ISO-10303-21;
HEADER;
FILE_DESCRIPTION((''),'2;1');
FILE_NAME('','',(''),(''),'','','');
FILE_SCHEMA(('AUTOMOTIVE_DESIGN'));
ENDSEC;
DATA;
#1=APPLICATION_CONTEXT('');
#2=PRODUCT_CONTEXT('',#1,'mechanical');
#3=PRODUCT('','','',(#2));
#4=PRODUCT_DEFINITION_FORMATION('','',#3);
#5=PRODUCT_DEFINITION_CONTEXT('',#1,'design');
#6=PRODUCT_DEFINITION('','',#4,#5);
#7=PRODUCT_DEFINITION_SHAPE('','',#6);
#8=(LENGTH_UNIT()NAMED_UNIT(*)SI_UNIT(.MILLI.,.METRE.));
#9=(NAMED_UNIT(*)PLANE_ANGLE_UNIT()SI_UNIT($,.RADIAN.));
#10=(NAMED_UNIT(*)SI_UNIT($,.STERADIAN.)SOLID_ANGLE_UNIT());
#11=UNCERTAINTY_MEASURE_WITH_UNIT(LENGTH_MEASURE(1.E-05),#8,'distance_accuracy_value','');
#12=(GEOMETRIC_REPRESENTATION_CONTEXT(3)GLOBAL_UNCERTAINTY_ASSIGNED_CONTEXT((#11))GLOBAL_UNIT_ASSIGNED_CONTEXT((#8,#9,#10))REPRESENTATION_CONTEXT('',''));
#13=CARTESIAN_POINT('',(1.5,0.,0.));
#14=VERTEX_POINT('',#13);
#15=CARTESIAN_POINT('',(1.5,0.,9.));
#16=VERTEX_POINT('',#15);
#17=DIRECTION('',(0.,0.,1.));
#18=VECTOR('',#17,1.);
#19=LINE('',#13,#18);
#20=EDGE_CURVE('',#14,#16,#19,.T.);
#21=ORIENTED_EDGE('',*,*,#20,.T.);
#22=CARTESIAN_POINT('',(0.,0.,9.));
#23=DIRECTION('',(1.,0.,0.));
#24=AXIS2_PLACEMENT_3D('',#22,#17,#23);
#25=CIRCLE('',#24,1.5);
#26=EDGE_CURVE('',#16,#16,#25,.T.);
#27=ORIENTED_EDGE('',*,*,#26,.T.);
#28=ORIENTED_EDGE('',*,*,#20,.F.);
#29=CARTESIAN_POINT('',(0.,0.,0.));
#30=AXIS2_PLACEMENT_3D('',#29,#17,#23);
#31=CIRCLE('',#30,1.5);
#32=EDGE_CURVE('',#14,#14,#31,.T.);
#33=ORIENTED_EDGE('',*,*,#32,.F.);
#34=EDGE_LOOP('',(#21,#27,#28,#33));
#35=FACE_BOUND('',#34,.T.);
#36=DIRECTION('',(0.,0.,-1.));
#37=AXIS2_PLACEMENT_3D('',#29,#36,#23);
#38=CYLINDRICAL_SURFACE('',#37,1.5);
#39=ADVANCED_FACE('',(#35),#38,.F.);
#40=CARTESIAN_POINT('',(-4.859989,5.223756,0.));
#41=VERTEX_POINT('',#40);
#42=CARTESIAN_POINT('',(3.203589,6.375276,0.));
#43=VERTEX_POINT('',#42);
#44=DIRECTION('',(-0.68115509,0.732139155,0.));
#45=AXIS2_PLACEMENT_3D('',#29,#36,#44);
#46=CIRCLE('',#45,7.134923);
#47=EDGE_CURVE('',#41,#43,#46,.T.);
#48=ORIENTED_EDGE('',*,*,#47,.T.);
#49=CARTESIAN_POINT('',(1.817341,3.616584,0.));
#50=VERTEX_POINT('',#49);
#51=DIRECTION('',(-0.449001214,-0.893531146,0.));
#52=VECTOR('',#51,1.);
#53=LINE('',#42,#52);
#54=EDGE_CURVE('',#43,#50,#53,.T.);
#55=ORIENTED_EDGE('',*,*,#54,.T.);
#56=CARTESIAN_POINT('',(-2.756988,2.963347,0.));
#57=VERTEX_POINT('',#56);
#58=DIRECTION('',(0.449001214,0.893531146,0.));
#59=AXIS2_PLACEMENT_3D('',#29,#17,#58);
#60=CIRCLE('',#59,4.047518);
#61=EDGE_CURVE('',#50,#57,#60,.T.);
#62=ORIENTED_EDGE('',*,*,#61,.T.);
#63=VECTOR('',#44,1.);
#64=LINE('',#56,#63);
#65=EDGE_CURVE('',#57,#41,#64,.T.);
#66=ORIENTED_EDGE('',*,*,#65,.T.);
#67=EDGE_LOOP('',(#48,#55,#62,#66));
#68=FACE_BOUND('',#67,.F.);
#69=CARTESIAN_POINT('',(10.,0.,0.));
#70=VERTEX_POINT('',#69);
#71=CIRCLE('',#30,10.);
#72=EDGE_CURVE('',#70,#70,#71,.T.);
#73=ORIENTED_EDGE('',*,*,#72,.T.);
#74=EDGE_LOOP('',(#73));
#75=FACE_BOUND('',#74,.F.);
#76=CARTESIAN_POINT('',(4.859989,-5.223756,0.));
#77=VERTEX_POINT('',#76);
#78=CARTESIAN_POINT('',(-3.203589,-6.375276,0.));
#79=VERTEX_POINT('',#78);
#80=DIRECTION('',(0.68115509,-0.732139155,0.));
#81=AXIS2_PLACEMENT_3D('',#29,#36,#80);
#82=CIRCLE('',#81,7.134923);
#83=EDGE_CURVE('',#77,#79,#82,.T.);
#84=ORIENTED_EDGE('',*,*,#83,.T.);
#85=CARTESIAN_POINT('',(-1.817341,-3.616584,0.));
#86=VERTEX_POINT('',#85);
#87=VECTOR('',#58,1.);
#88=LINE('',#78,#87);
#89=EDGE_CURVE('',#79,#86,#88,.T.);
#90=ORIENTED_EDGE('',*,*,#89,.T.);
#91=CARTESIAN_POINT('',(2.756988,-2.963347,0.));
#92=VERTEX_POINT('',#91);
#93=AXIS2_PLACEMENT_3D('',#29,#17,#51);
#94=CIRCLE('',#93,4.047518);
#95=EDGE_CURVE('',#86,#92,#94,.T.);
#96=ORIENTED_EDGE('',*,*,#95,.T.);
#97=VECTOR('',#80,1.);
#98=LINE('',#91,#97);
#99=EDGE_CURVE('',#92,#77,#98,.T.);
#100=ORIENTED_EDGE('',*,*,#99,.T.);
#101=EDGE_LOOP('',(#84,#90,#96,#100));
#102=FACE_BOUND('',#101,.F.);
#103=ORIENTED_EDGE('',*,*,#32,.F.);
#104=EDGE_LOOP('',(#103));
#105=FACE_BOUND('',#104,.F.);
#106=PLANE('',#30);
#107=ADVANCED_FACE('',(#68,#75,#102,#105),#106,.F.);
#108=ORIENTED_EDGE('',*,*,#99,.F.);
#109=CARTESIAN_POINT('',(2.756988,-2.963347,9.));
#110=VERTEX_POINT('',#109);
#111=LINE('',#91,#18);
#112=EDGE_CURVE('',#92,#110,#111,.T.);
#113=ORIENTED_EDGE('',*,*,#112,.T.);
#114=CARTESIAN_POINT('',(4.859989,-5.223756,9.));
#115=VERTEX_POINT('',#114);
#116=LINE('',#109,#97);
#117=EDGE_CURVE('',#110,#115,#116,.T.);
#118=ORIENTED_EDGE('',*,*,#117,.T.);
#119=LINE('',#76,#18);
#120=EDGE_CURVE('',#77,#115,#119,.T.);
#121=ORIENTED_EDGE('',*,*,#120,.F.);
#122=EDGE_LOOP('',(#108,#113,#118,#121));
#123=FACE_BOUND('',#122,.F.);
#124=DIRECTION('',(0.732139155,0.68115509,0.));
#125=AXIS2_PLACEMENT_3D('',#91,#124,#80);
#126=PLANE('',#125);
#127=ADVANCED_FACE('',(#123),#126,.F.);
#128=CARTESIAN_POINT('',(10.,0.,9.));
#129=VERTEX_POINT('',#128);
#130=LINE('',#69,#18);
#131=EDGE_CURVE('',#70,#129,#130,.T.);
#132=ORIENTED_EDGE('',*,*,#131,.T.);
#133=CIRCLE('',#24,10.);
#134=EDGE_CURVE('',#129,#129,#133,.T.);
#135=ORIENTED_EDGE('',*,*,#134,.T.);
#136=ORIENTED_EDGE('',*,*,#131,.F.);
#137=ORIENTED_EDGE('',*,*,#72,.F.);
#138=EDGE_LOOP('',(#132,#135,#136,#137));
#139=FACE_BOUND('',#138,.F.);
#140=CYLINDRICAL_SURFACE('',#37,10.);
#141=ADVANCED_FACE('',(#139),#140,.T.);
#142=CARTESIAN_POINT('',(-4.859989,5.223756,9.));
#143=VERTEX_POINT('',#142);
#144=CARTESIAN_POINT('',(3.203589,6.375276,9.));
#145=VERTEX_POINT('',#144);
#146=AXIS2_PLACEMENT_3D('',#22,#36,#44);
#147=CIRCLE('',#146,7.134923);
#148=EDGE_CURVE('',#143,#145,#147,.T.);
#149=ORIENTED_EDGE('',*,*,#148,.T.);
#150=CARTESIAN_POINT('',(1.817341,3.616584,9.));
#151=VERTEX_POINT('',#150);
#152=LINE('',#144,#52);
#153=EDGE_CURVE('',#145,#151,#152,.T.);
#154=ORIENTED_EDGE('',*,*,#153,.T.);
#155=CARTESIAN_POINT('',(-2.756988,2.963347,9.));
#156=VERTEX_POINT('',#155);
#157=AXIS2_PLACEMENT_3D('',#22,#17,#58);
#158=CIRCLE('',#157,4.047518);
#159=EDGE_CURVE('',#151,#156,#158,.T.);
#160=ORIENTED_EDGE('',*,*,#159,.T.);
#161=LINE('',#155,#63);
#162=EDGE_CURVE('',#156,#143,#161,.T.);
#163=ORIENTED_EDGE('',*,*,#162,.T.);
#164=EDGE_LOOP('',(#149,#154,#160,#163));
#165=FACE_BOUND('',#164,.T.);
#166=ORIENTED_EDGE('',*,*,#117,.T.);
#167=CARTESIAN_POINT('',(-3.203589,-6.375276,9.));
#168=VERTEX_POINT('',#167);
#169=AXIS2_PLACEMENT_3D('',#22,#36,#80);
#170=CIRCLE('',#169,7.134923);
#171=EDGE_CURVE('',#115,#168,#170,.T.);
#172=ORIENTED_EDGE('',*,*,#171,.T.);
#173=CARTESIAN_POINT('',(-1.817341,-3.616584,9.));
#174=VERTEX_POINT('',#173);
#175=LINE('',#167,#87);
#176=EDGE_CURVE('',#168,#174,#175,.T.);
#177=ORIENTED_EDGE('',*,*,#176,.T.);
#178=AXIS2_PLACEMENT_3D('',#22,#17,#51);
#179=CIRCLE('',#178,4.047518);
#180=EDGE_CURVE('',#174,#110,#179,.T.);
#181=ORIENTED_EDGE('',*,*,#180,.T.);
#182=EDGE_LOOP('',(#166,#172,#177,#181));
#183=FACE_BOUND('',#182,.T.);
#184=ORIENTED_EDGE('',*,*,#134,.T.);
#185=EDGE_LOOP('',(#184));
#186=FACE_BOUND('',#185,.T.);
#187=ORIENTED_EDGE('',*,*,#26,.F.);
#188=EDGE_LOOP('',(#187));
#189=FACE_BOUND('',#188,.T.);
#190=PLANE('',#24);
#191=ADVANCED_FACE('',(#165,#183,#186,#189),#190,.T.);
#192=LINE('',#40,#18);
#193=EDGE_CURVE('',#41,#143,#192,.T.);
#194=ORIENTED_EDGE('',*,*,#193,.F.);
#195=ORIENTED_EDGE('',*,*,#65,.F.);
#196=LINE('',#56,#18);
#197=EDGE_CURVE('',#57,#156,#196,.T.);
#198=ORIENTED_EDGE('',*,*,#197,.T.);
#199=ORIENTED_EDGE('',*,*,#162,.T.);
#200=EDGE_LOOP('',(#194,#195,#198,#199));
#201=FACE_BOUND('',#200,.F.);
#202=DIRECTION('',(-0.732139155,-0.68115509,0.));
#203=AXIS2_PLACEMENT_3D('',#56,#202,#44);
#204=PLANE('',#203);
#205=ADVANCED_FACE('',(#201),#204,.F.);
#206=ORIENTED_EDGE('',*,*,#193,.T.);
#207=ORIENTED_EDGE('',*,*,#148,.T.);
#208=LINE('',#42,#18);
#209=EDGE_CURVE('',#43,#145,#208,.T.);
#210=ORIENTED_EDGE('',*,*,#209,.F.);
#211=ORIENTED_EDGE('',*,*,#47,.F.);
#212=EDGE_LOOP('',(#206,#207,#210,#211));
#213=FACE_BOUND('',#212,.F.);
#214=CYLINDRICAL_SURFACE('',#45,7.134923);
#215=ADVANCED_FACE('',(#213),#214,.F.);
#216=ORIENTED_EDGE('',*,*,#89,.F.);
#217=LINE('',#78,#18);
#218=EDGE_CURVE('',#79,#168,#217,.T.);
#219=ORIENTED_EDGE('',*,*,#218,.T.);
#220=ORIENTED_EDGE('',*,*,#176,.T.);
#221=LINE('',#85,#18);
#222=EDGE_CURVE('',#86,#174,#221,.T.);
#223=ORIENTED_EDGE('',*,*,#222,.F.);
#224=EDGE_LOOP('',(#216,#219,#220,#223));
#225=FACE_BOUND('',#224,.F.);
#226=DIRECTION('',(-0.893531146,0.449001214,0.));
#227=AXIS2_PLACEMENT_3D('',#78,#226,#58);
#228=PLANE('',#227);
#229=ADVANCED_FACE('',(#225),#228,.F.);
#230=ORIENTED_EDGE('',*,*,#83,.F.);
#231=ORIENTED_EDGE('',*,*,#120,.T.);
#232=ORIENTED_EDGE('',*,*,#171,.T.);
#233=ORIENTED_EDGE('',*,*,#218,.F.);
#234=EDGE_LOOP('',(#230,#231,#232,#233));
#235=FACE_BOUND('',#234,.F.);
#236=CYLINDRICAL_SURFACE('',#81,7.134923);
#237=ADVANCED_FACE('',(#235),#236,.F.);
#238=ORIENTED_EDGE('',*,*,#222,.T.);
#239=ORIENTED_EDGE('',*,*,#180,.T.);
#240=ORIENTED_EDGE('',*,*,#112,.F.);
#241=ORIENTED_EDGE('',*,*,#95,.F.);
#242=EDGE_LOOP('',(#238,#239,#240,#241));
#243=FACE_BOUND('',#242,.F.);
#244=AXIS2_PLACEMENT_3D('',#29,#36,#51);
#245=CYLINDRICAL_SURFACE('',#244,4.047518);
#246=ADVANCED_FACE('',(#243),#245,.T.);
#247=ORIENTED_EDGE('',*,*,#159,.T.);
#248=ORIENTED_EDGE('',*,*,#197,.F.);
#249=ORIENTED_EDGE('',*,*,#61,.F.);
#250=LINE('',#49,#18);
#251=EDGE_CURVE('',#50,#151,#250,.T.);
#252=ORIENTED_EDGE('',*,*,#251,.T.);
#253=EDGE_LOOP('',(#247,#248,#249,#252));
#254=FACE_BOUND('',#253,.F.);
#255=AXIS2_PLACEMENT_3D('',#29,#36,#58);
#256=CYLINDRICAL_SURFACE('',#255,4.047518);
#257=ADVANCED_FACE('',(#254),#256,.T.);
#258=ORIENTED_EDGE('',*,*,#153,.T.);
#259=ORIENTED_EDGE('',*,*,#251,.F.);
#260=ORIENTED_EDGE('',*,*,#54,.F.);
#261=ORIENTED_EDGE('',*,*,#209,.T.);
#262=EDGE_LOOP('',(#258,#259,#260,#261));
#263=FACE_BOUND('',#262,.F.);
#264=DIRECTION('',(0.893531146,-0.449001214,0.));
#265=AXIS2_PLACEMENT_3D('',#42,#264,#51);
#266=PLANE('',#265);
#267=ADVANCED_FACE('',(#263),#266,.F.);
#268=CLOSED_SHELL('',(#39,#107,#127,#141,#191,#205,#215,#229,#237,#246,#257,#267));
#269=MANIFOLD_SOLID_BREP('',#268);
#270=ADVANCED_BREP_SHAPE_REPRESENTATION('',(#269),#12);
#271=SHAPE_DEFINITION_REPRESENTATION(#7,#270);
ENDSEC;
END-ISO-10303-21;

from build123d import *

# Parameters (mm, degrees)
F0_R     = 10
F0_R_2   = 1.5
F1_DEPTH = 9


# Not quite as in the source:
# - a feature names something its author has since deleted; it is built from what else it names


with BuildPart() as f1:
    # F0 (on Top) → F1 (new body)
    with BuildSketch(Plane.XY):
        Circle(F0_R)
        with BuildLine():
            Line((-3.2035890311, -6.37527581), (-1.8173406245, -3.6165836534))
            ThreePointArc((-1.8173406245, -3.6165836534), (0.5722008428, -4.0068679119), (2.756987683, -2.9633466189))
            Line((2.756987683, -2.9633466189), (4.8599890306, -5.2237564028))
            ThreePointArc((4.8599890306, -5.2237564028), (1.0086696565, -7.0632648157), (-3.2035890311, -6.37527581))
        make_face(mode=Mode.SUBTRACT)
        with BuildLine():
            ThreePointArc((-4.8599890306, 5.2237564028), (-1.0086696565, 7.0632648157), (3.2035890311, 6.37527581))
            Line((3.2035890311, 6.37527581), (1.8173406245, 3.6165836534))
            ThreePointArc((1.8173406245, 3.6165836534), (-0.5722008428, 4.0068679119), (-2.756987683, 2.9633466189))
            Line((-2.756987683, 2.9633466189), (-4.8599890306, 5.2237564028))
        make_face(mode=Mode.SUBTRACT)
        Circle(F0_R_2, mode=Mode.SUBTRACT)
    extrude(amount=F1_DEPTH)


solid = f1.part
